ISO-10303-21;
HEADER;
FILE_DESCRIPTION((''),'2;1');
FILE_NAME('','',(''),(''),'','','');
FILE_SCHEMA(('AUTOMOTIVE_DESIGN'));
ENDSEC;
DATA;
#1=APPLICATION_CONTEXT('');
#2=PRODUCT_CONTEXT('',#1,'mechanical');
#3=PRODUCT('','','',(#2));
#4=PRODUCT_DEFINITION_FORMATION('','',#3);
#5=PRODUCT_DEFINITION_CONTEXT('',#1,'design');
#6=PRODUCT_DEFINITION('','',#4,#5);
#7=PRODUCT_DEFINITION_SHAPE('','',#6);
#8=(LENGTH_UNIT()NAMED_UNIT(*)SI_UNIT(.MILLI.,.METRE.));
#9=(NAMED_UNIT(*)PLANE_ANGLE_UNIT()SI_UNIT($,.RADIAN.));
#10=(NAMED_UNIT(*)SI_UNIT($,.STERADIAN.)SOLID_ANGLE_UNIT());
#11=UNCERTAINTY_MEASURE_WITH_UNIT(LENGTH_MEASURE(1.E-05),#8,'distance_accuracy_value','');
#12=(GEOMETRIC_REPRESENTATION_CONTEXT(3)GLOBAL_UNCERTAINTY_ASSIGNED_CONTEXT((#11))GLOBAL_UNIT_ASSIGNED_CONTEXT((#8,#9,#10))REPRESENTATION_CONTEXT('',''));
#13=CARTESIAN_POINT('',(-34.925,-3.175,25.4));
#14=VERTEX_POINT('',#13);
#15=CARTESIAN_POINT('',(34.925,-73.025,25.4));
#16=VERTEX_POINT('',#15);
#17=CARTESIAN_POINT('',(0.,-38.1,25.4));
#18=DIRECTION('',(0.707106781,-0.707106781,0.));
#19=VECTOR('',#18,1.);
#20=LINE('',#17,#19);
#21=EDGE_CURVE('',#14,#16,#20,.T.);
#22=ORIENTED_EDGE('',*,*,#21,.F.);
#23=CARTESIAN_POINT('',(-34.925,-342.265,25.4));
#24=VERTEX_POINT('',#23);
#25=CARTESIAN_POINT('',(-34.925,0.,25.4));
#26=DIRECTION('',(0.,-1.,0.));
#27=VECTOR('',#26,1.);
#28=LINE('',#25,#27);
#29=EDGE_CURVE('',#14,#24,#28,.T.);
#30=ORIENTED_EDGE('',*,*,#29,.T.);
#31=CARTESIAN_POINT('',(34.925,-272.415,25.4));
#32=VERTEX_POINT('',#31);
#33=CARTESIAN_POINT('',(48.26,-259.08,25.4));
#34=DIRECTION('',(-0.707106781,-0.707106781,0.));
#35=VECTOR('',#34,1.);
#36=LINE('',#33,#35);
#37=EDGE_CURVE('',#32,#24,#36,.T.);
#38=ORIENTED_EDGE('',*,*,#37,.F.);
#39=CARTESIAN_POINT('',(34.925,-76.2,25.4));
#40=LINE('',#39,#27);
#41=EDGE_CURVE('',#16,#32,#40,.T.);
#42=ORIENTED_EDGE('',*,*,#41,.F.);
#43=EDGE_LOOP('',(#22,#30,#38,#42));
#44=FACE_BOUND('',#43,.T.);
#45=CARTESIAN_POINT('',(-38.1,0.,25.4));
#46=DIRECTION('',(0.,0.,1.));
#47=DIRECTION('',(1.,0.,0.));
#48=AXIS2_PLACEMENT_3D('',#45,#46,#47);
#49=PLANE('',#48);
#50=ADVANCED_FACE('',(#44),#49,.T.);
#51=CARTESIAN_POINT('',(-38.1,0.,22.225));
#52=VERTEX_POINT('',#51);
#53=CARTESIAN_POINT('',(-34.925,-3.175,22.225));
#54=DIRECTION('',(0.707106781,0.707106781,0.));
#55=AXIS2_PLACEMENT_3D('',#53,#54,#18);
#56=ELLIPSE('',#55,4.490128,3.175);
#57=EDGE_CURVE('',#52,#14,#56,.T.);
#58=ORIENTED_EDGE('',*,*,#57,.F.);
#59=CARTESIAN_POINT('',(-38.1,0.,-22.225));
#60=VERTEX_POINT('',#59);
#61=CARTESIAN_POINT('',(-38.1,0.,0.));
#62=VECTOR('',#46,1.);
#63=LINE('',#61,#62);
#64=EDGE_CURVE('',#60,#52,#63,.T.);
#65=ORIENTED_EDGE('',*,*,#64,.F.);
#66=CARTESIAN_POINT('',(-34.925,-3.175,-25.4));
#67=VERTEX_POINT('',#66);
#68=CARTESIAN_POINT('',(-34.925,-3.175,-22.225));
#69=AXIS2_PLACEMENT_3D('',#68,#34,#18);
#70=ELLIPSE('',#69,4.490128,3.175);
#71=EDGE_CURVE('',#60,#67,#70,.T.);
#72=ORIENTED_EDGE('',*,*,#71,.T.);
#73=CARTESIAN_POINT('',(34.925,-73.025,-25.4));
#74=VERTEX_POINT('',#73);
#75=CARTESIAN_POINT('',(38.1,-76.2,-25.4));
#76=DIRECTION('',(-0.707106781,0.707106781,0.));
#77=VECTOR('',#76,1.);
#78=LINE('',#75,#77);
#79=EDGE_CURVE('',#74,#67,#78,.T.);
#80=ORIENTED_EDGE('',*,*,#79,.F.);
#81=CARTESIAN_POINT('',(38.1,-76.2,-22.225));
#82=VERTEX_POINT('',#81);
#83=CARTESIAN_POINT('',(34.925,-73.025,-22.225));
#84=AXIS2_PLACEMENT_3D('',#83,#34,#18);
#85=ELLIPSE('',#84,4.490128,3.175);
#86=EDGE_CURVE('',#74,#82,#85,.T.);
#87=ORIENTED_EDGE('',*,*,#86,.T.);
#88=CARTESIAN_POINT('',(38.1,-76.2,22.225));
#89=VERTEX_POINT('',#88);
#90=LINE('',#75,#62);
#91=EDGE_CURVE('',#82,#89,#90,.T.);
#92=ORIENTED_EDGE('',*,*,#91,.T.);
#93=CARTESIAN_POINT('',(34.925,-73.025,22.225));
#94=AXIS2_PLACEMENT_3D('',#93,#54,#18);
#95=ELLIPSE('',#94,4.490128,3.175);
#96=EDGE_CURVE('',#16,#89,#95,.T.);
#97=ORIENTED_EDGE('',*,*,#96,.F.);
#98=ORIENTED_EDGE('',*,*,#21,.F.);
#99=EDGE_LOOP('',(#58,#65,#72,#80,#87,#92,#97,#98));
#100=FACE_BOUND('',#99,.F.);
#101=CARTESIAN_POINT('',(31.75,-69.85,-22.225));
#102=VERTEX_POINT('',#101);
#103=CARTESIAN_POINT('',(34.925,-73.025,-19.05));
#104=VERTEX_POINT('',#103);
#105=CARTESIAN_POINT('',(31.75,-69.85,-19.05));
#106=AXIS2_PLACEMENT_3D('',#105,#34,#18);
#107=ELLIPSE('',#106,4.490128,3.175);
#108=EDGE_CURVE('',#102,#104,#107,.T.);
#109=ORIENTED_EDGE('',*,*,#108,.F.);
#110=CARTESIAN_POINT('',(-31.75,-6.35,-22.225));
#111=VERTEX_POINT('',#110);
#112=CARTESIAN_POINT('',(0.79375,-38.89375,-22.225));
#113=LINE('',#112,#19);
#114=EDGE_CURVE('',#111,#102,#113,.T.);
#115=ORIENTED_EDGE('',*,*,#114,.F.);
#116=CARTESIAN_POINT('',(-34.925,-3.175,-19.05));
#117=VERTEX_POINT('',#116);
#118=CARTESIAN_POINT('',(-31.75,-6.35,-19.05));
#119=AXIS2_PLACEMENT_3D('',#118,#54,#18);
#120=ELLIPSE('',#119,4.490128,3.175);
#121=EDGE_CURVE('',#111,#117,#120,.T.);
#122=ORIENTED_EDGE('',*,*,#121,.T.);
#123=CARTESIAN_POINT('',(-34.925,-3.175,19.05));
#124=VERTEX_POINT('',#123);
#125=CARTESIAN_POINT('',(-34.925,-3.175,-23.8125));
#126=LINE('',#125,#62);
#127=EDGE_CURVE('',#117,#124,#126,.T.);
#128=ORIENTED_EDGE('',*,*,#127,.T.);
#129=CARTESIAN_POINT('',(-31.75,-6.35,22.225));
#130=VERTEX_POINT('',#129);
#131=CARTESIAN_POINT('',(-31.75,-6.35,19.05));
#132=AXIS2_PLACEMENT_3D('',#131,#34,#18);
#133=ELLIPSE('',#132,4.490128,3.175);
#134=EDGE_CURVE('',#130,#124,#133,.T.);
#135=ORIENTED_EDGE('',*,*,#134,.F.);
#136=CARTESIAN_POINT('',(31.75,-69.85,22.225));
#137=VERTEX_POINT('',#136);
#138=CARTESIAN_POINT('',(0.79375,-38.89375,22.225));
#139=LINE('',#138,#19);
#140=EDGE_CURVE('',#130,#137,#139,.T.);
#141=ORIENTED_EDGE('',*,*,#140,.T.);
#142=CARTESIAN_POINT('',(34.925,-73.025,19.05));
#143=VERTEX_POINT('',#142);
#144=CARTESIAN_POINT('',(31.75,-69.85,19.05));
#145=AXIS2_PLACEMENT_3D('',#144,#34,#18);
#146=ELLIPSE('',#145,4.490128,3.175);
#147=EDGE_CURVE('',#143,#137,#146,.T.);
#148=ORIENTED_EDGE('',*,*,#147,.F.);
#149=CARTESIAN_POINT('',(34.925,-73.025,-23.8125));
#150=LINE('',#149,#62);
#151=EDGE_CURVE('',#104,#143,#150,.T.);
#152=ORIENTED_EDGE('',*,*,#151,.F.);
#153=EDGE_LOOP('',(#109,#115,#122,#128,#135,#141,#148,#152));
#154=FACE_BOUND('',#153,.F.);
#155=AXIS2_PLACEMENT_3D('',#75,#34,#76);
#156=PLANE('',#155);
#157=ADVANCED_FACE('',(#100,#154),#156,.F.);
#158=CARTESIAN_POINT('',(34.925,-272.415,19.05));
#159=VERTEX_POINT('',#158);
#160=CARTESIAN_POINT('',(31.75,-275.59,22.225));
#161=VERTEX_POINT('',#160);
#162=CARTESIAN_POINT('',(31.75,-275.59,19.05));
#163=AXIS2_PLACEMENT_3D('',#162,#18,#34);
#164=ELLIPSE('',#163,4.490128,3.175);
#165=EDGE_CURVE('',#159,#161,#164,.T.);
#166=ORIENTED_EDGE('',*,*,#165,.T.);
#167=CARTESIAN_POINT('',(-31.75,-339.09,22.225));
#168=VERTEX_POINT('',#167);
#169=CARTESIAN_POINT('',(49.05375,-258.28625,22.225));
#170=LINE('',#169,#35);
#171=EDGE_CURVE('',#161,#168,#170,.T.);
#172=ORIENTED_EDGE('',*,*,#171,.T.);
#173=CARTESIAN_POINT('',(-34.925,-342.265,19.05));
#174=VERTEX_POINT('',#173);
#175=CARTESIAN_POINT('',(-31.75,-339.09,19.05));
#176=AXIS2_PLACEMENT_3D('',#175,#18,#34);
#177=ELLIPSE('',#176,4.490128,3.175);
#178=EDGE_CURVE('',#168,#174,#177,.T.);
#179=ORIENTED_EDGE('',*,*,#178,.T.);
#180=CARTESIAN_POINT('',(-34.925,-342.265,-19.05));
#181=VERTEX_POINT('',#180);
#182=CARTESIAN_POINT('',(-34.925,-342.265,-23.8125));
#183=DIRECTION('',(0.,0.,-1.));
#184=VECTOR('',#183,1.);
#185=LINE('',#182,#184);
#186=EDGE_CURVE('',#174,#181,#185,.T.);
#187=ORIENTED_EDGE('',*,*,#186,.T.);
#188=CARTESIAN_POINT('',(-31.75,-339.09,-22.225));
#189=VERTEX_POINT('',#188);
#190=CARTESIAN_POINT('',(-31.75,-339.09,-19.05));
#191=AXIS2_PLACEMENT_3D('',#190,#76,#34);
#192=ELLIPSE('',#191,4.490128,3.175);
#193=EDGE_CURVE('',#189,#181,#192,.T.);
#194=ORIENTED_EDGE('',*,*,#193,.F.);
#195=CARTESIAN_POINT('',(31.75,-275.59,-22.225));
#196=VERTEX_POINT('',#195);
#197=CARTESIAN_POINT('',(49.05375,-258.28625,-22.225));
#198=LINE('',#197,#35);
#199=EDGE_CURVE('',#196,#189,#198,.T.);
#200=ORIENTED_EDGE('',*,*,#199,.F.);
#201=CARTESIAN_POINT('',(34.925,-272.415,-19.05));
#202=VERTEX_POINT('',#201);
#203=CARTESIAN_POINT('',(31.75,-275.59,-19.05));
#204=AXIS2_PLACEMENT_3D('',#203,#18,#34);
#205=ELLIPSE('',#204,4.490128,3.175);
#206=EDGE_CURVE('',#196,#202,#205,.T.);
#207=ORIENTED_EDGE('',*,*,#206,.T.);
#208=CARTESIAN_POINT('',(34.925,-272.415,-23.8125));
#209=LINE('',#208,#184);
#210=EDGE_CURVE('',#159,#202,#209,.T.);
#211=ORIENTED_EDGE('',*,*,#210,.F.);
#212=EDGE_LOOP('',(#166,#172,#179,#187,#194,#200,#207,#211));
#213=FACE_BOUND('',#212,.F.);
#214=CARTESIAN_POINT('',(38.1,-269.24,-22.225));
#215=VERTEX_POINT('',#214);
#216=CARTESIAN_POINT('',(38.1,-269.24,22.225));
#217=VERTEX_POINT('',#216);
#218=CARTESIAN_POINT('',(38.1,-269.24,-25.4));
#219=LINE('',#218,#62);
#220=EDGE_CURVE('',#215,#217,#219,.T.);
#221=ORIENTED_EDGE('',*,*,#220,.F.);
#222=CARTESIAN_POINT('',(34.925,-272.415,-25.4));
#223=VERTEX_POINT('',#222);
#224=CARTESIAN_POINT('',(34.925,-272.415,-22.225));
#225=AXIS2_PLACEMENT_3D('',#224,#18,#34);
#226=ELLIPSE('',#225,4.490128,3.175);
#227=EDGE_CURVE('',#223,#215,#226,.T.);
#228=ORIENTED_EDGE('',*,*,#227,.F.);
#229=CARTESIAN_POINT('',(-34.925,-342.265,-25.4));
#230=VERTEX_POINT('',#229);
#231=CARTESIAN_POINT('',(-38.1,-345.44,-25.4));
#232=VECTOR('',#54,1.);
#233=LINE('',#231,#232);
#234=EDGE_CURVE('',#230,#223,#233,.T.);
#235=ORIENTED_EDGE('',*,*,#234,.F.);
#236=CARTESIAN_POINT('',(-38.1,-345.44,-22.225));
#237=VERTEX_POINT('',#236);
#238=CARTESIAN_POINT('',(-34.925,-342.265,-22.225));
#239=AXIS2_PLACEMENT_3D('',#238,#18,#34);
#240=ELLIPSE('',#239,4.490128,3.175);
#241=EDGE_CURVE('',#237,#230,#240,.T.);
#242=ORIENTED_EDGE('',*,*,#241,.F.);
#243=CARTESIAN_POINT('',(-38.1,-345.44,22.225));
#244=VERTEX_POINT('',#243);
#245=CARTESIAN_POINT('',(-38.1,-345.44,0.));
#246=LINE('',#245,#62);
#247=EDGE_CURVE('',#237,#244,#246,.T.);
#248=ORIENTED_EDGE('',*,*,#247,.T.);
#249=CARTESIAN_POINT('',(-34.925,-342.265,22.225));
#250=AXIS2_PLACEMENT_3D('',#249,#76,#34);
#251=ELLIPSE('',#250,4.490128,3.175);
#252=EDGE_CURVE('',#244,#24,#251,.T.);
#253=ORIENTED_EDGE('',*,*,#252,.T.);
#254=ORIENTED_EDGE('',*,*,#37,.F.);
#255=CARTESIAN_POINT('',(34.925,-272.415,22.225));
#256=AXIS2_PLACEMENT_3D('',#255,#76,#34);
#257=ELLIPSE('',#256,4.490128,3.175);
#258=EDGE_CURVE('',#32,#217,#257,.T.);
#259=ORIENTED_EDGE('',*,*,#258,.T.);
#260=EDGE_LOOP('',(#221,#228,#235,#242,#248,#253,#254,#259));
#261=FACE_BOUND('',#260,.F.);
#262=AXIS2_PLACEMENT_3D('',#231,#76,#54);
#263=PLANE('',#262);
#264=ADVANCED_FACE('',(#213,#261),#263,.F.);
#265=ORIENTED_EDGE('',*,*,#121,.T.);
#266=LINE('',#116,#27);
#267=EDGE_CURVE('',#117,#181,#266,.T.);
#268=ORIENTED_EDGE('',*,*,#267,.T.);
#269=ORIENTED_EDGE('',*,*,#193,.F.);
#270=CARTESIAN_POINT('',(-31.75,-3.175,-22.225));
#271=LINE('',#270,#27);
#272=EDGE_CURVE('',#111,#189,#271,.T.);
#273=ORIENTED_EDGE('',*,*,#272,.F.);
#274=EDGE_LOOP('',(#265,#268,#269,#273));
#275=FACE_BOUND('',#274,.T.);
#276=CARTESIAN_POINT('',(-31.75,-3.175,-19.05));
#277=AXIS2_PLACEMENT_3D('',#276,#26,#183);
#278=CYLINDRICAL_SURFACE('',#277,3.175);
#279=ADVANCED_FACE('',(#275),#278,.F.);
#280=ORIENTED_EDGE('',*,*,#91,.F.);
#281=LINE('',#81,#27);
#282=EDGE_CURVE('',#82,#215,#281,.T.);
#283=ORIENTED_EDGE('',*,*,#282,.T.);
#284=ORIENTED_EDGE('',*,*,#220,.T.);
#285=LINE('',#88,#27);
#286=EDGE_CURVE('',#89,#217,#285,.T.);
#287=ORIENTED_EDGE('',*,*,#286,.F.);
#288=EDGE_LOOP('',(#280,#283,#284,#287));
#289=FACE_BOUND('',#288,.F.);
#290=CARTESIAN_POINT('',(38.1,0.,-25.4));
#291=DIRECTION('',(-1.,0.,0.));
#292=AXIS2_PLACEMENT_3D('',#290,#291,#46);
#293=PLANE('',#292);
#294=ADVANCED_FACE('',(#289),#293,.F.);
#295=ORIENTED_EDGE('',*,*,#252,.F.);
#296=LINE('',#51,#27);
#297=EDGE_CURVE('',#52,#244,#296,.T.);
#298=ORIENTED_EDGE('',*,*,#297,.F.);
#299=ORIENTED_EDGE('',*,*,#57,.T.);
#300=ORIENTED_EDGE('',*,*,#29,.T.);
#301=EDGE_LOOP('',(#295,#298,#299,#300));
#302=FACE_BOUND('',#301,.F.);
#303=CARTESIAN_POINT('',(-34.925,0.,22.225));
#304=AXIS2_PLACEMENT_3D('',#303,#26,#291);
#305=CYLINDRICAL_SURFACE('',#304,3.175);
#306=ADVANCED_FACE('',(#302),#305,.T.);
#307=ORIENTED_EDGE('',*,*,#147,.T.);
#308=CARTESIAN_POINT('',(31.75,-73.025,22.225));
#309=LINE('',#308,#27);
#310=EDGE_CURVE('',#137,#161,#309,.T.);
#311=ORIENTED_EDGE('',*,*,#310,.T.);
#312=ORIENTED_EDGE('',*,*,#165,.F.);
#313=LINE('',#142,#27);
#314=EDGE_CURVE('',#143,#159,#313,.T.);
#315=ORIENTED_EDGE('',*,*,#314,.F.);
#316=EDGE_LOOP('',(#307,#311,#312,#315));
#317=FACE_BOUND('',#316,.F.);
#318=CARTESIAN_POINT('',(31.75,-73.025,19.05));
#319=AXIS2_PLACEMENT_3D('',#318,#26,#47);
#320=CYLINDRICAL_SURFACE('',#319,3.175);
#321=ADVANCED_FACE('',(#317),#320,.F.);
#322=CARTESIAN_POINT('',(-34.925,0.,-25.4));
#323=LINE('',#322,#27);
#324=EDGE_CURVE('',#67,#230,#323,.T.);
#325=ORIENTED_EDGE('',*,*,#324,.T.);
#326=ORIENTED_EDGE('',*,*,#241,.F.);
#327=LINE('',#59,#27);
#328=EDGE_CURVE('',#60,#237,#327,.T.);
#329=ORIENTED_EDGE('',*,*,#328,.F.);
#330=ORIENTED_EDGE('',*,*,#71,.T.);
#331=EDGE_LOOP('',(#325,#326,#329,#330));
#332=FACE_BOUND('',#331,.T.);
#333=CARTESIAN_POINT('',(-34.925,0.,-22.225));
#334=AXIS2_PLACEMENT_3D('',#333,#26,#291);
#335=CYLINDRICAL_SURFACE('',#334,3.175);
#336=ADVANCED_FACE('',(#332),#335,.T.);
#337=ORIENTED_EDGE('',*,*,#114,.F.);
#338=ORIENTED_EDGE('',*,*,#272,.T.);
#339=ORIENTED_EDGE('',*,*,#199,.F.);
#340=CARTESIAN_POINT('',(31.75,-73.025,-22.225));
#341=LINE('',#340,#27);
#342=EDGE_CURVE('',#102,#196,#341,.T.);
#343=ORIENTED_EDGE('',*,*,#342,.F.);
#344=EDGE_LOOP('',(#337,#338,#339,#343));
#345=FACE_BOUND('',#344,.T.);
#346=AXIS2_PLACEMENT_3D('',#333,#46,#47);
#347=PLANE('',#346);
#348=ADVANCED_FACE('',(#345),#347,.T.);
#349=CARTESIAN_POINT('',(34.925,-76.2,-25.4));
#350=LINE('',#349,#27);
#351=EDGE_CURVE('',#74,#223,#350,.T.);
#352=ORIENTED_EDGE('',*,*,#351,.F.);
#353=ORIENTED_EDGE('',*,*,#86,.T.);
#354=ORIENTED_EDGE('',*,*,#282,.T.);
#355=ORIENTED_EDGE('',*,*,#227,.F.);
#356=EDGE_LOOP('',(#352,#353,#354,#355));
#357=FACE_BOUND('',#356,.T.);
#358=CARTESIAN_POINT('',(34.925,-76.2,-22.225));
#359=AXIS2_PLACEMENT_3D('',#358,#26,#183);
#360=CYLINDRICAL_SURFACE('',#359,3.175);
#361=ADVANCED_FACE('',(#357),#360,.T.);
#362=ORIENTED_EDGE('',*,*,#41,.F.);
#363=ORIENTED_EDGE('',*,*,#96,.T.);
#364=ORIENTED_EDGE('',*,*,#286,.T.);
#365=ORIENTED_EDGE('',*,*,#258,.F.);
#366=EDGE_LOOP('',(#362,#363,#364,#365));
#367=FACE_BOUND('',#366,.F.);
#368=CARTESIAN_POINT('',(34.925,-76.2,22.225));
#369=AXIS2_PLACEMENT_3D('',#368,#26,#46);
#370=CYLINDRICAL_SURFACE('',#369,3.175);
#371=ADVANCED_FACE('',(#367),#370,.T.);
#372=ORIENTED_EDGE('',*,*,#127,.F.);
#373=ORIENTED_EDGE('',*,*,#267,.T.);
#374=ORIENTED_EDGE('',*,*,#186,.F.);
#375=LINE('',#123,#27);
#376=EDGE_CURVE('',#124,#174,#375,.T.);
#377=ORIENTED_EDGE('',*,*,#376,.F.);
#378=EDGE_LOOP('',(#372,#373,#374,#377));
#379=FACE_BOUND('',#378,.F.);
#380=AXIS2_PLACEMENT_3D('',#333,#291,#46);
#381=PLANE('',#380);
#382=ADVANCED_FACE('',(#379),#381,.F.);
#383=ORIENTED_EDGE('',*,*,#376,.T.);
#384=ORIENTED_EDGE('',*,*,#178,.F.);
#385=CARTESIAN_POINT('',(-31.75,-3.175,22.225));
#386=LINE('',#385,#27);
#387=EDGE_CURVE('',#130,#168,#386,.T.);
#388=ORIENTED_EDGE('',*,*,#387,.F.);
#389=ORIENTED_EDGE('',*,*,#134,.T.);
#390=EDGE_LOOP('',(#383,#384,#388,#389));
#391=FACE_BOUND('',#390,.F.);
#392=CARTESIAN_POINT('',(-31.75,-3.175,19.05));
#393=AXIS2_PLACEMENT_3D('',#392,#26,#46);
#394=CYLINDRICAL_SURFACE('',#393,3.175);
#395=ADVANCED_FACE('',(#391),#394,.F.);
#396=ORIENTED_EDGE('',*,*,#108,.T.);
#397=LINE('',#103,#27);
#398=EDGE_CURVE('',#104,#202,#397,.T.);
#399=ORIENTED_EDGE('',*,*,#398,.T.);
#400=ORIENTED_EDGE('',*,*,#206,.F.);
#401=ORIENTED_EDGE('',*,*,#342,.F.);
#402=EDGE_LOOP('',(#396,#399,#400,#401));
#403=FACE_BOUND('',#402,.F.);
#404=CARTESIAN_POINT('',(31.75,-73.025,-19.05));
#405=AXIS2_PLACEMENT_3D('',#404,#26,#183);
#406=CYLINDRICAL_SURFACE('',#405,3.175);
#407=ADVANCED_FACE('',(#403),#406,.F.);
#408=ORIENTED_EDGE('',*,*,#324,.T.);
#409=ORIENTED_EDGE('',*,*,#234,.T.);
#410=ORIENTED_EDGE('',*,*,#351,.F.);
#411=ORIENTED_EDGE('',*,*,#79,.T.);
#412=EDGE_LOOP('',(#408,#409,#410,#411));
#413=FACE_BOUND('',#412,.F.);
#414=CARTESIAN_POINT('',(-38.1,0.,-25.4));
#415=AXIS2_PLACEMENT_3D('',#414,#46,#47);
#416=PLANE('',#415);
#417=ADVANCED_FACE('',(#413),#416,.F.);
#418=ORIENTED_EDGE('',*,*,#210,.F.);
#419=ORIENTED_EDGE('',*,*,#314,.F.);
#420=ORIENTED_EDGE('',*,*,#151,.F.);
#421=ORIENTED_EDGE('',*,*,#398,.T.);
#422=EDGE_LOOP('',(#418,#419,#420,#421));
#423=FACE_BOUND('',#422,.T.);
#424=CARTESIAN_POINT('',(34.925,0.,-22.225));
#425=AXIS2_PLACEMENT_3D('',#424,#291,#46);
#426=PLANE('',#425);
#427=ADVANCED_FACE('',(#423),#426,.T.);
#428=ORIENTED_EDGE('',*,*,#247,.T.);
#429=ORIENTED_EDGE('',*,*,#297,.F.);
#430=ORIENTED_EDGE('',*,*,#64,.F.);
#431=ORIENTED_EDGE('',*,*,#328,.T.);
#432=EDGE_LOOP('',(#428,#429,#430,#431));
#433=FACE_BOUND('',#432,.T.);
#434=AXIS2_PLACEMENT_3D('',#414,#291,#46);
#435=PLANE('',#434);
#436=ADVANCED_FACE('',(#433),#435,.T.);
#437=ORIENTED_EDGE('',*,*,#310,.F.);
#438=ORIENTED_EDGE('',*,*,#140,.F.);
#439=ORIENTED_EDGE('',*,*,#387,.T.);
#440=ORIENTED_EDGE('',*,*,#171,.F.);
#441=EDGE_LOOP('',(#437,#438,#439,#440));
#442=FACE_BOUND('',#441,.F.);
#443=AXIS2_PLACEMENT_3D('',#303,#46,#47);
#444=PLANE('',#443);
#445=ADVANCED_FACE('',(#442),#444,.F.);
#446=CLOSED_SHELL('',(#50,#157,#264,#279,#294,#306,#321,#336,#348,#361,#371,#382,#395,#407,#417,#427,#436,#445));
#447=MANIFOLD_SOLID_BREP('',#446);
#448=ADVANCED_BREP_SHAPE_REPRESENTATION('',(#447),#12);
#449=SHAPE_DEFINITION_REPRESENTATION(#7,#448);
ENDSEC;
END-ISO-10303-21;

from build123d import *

# Parameters (mm, degrees)
F0_W     = 76.2
F0_H     = 50.8
F0_W_2   = 69.85
F0_H_2   = 44.45
F2_DEPTH = 345.44
F4_DEPTH = 50.801
F6_DEPTH = 50.801
F7_R     = 3.175


# Not quite as in the source:
# - a variable given as a bare number and used for a length is read in inches; the dataset says mm whatever the document's units were


with BuildPart() as f2:
    # F0 (on Front) → F2 (new body)
    with BuildSketch(Plane.XZ):
        Rectangle(F0_W, F0_H)
        Rectangle(F0_W_2, F0_H_2, mode=Mode.SUBTRACT)
    extrude(amount=F2_DEPTH)

    # F3 (on face) → F4 (cut, through all)
    with BuildSketch(Plane(origin=(0, 0, -25.4), x_dir=(1, 0, 0), z_dir=(0, 0, -1))):
        Polygon((38.1, 345.44), (-38.1, 345.44), (38.1, 269.24), align=None)
    extrude(amount=-F4_DEPTH, mode=Mode.SUBTRACT)

    # F5 (on face) → F6 (cut, through all)
    with BuildSketch(Plane(origin=(0, 0, -25.4), x_dir=(1, 0, 0), z_dir=(0, 0, -1))):
        Polygon((38.1, 76.2), (-38.1, 0), (38.1, 0), align=None)
    extrude(amount=-F6_DEPTH, mode=Mode.SUBTRACT)

    # F7
    f7_edges = [f2.edges().sort_by_distance(p)[0] for p in [
        (38.1, -172.72, -25.4),
        (-38.1, -172.72, -25.4),
        (-38.1, -172.72, 25.4),
        (38.1, -172.72, 25.4),
        (-34.925, -172.72, 22.225),
        (34.925, -172.72, 22.225),
        (-34.925, -172.72, -22.225),
        (34.925, -172.72, -22.225),
    ]]
    fillet(f7_edges, radius=F7_R)


solid = f2.part
